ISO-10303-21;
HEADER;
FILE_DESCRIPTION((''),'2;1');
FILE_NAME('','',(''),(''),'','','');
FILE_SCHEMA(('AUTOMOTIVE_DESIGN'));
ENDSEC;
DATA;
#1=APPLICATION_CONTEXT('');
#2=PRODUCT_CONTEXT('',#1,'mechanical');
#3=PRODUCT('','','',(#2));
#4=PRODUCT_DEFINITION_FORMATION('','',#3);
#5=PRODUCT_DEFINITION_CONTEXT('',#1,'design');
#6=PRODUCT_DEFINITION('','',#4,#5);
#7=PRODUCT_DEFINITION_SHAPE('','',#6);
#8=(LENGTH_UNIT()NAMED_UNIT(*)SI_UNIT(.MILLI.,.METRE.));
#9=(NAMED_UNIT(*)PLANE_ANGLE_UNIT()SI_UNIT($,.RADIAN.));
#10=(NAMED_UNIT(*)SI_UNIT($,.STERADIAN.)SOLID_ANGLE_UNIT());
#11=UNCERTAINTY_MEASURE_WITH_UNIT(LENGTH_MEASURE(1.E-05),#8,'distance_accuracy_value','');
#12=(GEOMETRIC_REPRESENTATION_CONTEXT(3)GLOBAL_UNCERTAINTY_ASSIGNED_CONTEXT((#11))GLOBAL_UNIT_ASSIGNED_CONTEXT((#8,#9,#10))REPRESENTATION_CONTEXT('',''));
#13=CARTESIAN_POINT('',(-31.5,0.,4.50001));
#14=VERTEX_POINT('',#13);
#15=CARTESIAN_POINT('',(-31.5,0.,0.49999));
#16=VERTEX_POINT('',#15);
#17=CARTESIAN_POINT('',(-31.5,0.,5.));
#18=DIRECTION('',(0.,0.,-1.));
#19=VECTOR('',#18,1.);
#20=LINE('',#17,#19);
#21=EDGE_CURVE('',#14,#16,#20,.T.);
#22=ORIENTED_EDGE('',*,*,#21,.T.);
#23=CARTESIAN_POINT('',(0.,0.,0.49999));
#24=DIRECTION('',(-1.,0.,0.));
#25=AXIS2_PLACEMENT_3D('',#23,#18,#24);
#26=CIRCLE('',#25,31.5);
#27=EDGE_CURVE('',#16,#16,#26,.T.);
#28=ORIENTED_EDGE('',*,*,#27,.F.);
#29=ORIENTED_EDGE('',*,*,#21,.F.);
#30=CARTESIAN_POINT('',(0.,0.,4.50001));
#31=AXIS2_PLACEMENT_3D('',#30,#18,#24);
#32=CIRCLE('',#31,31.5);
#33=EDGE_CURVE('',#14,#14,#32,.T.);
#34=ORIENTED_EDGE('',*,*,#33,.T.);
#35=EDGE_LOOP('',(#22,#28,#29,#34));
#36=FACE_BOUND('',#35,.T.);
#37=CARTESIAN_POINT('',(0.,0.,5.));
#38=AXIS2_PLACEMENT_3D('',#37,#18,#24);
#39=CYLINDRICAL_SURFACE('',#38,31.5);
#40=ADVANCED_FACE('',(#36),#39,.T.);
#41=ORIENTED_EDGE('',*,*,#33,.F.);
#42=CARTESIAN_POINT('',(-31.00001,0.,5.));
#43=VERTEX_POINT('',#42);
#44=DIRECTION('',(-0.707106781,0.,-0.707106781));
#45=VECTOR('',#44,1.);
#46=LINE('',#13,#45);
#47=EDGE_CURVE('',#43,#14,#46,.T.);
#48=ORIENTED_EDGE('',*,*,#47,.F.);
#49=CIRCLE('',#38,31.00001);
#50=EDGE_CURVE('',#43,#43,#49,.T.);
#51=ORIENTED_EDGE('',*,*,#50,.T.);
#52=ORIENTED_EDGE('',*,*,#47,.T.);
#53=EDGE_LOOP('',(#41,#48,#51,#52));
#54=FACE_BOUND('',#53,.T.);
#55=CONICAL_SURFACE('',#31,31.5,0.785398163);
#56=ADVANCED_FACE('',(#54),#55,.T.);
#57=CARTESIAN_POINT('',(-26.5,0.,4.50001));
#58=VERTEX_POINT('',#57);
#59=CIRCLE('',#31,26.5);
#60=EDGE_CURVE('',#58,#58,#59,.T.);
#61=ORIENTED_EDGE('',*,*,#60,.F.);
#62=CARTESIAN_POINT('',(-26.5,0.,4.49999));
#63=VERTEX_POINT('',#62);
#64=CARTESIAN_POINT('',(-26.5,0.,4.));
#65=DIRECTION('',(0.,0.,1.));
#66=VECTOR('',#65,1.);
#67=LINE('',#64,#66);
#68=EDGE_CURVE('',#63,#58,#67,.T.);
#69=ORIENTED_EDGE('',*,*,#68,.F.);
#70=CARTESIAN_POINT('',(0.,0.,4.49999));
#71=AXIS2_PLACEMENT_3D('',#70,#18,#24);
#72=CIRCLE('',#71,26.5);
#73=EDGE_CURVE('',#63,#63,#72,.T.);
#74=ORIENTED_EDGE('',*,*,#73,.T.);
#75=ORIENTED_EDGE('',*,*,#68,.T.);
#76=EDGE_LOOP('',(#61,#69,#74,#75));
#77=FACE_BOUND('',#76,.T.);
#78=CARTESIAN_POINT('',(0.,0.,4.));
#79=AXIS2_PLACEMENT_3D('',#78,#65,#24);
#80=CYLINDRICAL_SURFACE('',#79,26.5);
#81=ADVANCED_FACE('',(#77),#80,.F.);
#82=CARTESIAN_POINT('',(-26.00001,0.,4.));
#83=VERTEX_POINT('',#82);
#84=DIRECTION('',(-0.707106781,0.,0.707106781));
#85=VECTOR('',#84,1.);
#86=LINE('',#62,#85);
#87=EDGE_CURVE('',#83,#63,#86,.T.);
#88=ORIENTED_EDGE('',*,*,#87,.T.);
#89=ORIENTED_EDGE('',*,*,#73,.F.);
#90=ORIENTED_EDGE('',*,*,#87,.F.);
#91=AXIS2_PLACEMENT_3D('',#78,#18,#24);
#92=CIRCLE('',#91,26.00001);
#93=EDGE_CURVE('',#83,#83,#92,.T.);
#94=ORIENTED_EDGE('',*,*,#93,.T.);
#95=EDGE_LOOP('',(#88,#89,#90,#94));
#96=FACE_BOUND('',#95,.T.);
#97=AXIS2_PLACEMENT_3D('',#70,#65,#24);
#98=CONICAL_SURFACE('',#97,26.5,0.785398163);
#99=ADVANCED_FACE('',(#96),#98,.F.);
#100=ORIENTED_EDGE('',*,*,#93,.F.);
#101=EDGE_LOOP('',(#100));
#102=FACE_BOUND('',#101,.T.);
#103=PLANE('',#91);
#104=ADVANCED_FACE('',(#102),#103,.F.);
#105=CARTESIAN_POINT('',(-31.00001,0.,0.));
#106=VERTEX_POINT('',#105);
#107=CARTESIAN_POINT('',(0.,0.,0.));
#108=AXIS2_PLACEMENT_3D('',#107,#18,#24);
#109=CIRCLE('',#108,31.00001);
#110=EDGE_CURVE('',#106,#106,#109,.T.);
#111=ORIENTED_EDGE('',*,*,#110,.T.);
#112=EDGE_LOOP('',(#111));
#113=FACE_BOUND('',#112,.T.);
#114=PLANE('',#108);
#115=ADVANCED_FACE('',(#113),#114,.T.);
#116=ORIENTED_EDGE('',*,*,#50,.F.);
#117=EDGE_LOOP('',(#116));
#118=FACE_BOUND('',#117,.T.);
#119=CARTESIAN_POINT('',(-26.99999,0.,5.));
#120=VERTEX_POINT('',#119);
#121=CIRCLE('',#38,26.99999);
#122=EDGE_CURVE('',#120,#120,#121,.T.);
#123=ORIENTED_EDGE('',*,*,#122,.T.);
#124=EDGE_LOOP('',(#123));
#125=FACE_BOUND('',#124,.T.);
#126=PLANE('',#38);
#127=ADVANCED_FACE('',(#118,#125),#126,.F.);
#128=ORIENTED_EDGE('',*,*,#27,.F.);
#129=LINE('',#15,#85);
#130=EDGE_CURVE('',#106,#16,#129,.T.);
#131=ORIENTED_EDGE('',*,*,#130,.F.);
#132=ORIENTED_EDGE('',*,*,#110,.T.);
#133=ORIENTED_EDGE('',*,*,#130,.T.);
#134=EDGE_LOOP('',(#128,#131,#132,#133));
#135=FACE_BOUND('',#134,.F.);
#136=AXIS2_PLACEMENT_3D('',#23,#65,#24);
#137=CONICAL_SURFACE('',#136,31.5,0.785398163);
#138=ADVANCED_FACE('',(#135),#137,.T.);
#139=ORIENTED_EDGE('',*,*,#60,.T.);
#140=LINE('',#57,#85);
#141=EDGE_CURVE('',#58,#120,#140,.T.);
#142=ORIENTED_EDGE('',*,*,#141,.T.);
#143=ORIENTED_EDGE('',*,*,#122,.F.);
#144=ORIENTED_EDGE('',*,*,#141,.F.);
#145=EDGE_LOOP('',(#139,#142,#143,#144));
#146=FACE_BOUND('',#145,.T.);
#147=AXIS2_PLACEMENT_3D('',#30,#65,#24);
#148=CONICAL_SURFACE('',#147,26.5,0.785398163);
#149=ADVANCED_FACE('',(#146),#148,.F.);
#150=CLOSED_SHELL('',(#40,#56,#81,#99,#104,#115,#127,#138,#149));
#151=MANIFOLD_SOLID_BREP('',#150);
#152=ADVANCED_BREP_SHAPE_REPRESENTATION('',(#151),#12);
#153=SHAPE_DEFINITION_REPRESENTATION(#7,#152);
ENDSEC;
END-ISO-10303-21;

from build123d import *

# Parameters (mm, degrees)
F2_SIZE = 0.49999


# Not quite as in the source:
# - a fillet or chamfer is up to 0.001 mm smaller than in the source, because OpenCascade refuses the exact size


with BuildPart() as f1:
    # F0 (on Front) → F1 (revolve)
    with BuildSketch(Plane.XZ):
        Polygon((-31.5, 0), (0, 0), (0, 4), (-26.5, 4), (-26.5, 5), (-31.5, 5), align=None)
    revolve(axis=Axis((0, 0, 2), (0, 0, -1)))

    # F2 (size 0.5 in the source; OpenCascade refuses exactly that, so slightly less here)
    f2_edges = [f1.edges().sort_by_distance(p)[0] for p in [
        (26.5, 0, 4),
        (26.5, 0, 5),
        (31.5, 0, 5),
        (31.5, 0, 0),
    ]]
    chamfer(f2_edges, length=F2_SIZE)


solid = f1.part
